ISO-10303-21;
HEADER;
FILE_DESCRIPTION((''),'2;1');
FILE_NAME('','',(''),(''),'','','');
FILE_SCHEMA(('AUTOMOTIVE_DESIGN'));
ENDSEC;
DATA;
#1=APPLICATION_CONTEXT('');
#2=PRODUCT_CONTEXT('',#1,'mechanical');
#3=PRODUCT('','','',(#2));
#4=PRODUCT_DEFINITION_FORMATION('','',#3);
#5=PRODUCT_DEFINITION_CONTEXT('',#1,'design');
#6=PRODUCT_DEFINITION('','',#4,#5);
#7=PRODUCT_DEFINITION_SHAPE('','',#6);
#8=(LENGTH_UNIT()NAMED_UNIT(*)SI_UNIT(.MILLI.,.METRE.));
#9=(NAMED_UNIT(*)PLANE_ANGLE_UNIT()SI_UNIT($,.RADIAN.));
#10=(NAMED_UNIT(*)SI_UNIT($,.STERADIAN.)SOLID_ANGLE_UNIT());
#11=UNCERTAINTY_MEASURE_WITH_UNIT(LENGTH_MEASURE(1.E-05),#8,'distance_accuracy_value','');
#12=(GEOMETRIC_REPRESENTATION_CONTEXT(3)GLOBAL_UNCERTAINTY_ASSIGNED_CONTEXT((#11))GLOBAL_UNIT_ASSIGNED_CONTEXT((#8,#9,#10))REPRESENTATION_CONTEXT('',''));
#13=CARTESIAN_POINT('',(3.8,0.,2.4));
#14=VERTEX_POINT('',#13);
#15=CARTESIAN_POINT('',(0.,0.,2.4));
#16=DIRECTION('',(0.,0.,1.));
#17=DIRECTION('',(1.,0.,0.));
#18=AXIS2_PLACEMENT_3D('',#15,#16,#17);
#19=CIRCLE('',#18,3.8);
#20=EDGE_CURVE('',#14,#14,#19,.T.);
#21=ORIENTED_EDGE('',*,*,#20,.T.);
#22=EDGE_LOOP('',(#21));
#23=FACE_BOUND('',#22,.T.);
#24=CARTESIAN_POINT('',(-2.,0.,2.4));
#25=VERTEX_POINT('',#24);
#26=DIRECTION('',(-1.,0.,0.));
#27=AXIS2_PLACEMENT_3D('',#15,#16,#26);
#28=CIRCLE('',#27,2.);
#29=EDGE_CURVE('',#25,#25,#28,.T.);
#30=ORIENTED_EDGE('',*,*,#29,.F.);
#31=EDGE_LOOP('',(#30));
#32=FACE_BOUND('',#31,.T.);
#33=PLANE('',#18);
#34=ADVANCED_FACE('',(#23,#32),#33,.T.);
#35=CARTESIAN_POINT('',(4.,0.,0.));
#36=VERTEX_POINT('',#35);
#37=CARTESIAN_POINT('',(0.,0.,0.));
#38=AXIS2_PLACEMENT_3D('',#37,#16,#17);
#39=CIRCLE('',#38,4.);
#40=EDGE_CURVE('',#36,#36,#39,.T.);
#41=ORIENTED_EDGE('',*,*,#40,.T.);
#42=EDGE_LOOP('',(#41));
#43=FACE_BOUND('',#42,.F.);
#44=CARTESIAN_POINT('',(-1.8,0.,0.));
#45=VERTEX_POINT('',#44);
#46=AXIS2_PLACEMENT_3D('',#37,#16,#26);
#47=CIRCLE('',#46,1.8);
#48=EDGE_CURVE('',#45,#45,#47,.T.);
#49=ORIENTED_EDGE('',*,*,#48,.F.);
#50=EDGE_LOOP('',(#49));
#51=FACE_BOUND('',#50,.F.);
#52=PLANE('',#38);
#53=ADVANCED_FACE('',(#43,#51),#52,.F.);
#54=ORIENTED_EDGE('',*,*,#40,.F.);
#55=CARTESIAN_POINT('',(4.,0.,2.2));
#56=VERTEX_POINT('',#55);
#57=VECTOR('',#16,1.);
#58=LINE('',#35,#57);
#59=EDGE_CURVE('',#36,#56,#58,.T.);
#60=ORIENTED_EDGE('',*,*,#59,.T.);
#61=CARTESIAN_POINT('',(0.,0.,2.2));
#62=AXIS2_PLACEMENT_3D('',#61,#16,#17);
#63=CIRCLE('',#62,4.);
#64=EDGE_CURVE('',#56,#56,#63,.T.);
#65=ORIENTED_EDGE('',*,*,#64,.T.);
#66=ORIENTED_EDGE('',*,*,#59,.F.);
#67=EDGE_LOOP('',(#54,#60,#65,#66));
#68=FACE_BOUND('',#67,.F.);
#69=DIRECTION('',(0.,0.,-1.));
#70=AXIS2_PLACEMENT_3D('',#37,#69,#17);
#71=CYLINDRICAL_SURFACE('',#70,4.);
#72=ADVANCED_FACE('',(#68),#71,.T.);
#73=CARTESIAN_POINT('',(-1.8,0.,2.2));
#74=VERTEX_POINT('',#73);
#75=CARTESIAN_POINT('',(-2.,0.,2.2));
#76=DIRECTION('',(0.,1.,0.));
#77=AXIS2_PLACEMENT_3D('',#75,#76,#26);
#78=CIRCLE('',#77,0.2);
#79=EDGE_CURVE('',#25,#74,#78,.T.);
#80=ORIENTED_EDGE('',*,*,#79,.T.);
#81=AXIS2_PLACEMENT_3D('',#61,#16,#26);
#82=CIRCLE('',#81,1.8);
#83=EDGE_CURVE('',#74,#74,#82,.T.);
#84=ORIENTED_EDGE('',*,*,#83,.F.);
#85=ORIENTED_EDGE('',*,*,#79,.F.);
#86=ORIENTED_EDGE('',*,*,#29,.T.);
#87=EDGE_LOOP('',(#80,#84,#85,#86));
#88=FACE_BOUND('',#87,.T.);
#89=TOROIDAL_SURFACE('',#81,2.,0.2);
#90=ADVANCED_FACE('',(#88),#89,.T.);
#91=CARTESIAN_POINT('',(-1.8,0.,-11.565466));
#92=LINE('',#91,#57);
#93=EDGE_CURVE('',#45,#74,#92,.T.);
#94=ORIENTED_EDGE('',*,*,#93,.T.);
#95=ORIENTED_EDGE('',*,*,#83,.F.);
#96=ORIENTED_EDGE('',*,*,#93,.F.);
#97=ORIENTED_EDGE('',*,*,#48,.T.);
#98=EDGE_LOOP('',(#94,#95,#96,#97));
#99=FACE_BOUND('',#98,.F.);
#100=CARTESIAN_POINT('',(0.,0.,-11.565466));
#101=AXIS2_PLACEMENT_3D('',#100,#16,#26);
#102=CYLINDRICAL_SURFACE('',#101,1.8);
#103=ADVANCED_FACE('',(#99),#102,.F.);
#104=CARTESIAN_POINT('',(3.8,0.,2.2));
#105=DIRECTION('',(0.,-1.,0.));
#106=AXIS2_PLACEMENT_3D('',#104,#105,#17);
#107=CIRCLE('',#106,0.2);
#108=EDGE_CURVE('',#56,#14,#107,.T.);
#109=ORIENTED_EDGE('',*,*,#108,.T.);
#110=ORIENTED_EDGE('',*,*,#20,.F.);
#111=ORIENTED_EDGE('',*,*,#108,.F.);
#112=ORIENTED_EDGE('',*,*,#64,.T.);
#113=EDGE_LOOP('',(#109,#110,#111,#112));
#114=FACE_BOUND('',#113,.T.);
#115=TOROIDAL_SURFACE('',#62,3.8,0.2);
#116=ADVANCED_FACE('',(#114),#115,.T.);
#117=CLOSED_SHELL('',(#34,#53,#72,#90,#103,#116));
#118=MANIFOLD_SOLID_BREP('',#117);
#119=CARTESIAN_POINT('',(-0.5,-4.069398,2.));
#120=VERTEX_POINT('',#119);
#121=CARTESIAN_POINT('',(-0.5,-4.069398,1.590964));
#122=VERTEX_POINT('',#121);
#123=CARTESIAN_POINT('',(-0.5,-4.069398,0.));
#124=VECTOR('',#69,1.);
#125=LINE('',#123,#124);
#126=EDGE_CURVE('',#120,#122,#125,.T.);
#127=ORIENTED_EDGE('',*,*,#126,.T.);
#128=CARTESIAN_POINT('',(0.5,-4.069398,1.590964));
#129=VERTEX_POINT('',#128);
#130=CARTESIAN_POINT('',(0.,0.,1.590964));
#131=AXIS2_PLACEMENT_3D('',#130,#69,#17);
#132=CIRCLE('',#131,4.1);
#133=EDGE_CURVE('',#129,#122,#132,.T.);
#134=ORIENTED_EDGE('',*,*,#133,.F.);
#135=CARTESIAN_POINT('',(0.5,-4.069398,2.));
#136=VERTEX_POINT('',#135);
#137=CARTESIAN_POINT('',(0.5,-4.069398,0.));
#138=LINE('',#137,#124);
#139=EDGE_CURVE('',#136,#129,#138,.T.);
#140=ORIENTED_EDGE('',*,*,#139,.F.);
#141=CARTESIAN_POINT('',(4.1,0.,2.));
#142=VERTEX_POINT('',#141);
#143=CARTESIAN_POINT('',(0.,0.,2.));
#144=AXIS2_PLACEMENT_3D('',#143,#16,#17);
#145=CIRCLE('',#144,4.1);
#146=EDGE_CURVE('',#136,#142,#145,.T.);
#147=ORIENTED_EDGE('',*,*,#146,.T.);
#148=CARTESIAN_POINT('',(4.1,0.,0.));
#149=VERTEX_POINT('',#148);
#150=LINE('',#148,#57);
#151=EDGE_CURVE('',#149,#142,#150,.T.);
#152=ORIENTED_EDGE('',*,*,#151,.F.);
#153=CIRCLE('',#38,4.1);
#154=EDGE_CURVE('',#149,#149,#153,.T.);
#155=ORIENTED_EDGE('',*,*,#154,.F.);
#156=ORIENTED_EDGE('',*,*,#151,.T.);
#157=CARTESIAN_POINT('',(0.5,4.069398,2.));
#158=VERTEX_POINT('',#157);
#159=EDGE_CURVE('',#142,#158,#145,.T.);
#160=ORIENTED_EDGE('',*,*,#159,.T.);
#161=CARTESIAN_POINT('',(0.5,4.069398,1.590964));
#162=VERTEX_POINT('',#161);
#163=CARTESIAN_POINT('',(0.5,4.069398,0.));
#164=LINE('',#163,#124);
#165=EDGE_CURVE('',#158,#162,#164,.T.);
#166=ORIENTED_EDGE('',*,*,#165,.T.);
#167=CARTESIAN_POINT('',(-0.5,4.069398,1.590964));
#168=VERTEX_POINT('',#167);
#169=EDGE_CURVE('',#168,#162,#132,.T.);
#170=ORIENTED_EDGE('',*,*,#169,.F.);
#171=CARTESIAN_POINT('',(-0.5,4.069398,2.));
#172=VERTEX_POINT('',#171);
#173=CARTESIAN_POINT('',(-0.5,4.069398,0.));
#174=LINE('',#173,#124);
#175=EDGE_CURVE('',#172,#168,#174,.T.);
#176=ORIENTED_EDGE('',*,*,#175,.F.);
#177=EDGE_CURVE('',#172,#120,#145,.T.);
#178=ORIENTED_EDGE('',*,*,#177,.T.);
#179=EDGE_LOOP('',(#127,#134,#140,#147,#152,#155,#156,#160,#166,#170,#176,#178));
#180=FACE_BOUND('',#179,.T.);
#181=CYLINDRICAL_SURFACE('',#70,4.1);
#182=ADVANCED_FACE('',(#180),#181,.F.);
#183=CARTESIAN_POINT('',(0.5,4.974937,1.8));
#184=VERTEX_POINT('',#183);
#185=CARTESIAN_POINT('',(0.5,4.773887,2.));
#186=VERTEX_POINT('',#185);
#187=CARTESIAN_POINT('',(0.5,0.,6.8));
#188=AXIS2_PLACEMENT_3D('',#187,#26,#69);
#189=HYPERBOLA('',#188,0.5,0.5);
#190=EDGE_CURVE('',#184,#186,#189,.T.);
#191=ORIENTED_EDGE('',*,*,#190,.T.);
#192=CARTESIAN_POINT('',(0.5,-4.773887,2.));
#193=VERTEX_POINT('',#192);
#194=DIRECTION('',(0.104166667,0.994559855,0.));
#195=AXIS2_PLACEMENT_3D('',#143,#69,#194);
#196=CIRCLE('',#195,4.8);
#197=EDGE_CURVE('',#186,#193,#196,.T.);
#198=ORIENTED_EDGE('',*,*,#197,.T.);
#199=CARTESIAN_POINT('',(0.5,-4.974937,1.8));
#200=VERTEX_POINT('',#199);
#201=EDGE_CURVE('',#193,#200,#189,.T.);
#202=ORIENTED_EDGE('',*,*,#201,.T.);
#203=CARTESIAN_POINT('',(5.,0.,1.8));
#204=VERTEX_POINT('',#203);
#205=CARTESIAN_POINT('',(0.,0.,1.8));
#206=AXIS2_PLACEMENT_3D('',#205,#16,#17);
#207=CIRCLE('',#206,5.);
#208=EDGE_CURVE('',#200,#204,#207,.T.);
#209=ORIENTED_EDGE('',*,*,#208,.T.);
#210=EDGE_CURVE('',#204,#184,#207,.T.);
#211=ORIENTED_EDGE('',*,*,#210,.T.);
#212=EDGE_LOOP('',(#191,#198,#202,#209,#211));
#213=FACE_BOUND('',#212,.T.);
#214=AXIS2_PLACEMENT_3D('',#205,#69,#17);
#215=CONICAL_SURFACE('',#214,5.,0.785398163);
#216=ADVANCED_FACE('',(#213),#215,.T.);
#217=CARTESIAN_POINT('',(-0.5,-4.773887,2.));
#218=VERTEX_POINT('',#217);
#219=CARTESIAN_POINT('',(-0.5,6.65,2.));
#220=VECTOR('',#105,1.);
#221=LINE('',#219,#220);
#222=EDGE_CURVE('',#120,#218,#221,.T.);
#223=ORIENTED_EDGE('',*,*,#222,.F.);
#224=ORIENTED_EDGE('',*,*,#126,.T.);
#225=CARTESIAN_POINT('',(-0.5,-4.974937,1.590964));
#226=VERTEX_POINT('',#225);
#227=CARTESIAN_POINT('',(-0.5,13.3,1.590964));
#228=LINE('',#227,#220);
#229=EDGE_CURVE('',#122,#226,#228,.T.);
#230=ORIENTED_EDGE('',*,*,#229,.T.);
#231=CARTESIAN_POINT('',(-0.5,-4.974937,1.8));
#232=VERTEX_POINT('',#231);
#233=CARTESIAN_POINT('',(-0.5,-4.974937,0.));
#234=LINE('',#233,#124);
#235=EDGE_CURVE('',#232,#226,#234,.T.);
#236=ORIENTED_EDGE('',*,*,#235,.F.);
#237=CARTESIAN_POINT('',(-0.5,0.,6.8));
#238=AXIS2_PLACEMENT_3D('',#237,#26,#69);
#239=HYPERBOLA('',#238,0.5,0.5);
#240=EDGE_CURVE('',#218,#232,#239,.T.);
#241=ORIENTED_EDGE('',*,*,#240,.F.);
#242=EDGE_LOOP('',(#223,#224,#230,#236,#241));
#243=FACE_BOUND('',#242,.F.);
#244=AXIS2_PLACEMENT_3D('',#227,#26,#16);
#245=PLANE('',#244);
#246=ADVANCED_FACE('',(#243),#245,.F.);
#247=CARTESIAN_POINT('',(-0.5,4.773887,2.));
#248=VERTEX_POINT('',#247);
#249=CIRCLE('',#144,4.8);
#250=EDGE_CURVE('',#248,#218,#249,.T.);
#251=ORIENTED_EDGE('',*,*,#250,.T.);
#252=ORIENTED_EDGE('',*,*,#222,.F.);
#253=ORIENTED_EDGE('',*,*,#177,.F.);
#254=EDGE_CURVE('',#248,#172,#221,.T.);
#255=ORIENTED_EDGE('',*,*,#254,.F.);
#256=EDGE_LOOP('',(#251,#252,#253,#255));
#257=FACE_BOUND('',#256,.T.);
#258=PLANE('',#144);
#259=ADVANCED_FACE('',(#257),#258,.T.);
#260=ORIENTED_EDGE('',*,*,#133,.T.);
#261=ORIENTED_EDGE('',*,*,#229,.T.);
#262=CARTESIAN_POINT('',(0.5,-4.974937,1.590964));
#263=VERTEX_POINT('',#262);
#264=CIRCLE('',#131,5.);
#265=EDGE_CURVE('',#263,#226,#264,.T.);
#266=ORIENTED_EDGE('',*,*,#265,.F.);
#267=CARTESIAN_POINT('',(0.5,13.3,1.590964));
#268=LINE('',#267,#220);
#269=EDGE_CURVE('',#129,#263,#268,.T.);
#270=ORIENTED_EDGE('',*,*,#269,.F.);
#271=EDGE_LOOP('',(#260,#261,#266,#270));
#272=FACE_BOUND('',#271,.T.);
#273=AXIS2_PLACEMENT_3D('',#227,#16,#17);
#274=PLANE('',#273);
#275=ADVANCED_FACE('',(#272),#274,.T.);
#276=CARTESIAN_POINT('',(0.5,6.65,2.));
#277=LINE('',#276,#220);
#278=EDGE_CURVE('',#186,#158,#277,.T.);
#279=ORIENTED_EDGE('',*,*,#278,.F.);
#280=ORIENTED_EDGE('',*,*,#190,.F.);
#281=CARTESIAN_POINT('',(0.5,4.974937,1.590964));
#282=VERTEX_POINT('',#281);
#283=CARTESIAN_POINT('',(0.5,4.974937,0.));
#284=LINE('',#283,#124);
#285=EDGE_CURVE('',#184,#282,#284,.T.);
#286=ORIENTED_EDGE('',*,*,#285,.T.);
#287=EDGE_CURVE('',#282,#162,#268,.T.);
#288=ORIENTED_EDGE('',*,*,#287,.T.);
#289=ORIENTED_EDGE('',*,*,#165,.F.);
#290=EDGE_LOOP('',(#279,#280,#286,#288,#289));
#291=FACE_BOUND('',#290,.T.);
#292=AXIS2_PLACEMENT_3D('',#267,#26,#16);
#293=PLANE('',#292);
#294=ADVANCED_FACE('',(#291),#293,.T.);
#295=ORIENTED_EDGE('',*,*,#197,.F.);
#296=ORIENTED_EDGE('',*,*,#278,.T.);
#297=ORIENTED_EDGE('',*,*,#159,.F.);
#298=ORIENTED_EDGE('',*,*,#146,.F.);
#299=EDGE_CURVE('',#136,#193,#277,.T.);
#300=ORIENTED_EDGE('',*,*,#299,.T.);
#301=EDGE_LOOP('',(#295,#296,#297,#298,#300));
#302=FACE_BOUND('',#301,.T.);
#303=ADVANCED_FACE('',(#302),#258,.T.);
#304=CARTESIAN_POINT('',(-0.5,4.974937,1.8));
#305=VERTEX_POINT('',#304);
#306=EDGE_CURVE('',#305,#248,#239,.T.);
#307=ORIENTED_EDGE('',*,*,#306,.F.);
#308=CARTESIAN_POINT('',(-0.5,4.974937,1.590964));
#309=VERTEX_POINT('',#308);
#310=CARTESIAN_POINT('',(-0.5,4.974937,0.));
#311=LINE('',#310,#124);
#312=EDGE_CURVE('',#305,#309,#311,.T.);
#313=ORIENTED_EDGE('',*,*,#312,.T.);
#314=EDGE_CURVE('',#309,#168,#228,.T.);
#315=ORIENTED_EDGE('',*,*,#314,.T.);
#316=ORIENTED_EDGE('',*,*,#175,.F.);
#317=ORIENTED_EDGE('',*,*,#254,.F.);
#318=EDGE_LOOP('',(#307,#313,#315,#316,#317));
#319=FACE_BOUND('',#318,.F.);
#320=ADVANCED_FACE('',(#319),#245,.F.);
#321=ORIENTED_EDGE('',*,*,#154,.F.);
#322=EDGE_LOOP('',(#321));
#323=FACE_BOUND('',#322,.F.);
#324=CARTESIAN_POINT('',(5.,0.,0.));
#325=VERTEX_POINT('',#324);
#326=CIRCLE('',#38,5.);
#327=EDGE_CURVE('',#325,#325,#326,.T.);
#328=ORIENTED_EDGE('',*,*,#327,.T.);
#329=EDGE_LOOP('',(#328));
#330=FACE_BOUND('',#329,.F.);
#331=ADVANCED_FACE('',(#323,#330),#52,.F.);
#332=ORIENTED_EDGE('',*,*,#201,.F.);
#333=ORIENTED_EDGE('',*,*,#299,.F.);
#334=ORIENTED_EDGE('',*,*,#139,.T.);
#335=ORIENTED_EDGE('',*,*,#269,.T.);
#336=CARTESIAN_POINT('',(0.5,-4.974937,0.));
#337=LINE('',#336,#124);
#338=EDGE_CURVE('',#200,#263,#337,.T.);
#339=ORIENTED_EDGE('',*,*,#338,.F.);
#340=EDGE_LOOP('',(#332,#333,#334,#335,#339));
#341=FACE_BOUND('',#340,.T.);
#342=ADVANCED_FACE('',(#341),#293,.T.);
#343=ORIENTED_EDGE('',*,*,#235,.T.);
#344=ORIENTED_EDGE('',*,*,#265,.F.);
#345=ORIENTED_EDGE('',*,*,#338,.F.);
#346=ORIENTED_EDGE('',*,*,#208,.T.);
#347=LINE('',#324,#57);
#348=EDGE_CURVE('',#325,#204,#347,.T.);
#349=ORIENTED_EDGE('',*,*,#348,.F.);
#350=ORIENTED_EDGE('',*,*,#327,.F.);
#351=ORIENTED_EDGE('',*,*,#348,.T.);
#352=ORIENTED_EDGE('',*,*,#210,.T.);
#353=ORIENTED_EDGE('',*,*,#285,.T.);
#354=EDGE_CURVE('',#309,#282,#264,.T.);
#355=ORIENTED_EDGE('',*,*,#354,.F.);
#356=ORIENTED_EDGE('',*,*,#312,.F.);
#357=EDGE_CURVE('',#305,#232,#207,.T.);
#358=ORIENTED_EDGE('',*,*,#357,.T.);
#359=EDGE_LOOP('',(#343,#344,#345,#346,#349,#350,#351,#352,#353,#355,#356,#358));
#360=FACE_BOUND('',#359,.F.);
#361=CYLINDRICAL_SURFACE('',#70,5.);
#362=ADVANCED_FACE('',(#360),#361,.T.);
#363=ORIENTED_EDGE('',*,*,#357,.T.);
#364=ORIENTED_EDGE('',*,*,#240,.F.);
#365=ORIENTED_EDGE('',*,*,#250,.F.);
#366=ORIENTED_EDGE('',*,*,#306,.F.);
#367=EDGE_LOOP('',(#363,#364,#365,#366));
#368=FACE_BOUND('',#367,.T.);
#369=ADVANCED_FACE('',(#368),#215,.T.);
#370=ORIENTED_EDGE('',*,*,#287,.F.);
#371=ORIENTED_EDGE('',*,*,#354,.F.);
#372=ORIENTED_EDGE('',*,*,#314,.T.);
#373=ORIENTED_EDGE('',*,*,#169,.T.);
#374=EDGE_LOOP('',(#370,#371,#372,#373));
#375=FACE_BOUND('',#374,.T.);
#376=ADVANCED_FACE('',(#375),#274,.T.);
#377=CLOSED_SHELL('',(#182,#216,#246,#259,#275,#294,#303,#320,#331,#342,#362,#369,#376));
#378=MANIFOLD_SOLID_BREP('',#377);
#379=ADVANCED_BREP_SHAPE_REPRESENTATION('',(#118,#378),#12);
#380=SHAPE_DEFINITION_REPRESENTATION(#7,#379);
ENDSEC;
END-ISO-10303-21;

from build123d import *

# Parameters (mm, degrees)
F0_R     = 4
F1_DEPTH = 2.4
F0_R_2   = 5
F0_R_3   = 4.1
F2_DEPTH = 2
F3_D     = 3.6
F4_R     = 0.2
F5_SIZE  = 0.2
F6_W     = 1
F6_H     = 0.5
F7_DEPTH = 25


with BuildPart() as f1:
    # F0 (on Top) → F1 (new body)
    with BuildSketch(Plane.XY):
        Circle(F0_R)
    extrude(amount=F1_DEPTH)

    # F3 (through all)
    with Locations(Plane(origin=(0, 0, 0), x_dir=(1, 0, 0), z_dir=(0, 0, -1))):
        with Locations((0, 0)):
            Hole(F3_D / 2)

    # F4
    f4_edges = [f1.edges().sort_by_distance(p)[0] for p in [
        (-4, 0, 2.4),
        (-1.8, 0, 2.4),
    ]]
    fillet(f4_edges, radius=F4_R)


with BuildPart() as f2:
    # F0 (on Top) → F2 (new body)
    with BuildSketch(Plane.XY):
        Circle(F0_R_2)
        Circle(F0_R_3, mode=Mode.SUBTRACT)
    extrude(amount=F2_DEPTH)

    # F5
    f5_edges = [f2.edges().sort_by_distance(p)[0] for p in [
        (-5, 0, 2),
    ]]
    chamfer(f5_edges, length=F5_SIZE)


with BuildPart() as f7:
    # F6 (on Front) → F7 (new body)
    with BuildSketch(Plane.XZ):
        with Locations((0.5, 1.8409643844)):
            Rectangle(F6_W, F6_H)
    extrude(amount=F7_DEPTH)


with BuildPart() as f7_1:
    # F8: moved
    add(f7.part.moved(Location((-0.5, 13.3, 0))))


with BuildPart() as f2_1:
    add(f2.part)

    # F9: cut F7
    add(f7_1.part, mode=Mode.SUBTRACT)


solid = Compound([f1.part, f2_1.part])
